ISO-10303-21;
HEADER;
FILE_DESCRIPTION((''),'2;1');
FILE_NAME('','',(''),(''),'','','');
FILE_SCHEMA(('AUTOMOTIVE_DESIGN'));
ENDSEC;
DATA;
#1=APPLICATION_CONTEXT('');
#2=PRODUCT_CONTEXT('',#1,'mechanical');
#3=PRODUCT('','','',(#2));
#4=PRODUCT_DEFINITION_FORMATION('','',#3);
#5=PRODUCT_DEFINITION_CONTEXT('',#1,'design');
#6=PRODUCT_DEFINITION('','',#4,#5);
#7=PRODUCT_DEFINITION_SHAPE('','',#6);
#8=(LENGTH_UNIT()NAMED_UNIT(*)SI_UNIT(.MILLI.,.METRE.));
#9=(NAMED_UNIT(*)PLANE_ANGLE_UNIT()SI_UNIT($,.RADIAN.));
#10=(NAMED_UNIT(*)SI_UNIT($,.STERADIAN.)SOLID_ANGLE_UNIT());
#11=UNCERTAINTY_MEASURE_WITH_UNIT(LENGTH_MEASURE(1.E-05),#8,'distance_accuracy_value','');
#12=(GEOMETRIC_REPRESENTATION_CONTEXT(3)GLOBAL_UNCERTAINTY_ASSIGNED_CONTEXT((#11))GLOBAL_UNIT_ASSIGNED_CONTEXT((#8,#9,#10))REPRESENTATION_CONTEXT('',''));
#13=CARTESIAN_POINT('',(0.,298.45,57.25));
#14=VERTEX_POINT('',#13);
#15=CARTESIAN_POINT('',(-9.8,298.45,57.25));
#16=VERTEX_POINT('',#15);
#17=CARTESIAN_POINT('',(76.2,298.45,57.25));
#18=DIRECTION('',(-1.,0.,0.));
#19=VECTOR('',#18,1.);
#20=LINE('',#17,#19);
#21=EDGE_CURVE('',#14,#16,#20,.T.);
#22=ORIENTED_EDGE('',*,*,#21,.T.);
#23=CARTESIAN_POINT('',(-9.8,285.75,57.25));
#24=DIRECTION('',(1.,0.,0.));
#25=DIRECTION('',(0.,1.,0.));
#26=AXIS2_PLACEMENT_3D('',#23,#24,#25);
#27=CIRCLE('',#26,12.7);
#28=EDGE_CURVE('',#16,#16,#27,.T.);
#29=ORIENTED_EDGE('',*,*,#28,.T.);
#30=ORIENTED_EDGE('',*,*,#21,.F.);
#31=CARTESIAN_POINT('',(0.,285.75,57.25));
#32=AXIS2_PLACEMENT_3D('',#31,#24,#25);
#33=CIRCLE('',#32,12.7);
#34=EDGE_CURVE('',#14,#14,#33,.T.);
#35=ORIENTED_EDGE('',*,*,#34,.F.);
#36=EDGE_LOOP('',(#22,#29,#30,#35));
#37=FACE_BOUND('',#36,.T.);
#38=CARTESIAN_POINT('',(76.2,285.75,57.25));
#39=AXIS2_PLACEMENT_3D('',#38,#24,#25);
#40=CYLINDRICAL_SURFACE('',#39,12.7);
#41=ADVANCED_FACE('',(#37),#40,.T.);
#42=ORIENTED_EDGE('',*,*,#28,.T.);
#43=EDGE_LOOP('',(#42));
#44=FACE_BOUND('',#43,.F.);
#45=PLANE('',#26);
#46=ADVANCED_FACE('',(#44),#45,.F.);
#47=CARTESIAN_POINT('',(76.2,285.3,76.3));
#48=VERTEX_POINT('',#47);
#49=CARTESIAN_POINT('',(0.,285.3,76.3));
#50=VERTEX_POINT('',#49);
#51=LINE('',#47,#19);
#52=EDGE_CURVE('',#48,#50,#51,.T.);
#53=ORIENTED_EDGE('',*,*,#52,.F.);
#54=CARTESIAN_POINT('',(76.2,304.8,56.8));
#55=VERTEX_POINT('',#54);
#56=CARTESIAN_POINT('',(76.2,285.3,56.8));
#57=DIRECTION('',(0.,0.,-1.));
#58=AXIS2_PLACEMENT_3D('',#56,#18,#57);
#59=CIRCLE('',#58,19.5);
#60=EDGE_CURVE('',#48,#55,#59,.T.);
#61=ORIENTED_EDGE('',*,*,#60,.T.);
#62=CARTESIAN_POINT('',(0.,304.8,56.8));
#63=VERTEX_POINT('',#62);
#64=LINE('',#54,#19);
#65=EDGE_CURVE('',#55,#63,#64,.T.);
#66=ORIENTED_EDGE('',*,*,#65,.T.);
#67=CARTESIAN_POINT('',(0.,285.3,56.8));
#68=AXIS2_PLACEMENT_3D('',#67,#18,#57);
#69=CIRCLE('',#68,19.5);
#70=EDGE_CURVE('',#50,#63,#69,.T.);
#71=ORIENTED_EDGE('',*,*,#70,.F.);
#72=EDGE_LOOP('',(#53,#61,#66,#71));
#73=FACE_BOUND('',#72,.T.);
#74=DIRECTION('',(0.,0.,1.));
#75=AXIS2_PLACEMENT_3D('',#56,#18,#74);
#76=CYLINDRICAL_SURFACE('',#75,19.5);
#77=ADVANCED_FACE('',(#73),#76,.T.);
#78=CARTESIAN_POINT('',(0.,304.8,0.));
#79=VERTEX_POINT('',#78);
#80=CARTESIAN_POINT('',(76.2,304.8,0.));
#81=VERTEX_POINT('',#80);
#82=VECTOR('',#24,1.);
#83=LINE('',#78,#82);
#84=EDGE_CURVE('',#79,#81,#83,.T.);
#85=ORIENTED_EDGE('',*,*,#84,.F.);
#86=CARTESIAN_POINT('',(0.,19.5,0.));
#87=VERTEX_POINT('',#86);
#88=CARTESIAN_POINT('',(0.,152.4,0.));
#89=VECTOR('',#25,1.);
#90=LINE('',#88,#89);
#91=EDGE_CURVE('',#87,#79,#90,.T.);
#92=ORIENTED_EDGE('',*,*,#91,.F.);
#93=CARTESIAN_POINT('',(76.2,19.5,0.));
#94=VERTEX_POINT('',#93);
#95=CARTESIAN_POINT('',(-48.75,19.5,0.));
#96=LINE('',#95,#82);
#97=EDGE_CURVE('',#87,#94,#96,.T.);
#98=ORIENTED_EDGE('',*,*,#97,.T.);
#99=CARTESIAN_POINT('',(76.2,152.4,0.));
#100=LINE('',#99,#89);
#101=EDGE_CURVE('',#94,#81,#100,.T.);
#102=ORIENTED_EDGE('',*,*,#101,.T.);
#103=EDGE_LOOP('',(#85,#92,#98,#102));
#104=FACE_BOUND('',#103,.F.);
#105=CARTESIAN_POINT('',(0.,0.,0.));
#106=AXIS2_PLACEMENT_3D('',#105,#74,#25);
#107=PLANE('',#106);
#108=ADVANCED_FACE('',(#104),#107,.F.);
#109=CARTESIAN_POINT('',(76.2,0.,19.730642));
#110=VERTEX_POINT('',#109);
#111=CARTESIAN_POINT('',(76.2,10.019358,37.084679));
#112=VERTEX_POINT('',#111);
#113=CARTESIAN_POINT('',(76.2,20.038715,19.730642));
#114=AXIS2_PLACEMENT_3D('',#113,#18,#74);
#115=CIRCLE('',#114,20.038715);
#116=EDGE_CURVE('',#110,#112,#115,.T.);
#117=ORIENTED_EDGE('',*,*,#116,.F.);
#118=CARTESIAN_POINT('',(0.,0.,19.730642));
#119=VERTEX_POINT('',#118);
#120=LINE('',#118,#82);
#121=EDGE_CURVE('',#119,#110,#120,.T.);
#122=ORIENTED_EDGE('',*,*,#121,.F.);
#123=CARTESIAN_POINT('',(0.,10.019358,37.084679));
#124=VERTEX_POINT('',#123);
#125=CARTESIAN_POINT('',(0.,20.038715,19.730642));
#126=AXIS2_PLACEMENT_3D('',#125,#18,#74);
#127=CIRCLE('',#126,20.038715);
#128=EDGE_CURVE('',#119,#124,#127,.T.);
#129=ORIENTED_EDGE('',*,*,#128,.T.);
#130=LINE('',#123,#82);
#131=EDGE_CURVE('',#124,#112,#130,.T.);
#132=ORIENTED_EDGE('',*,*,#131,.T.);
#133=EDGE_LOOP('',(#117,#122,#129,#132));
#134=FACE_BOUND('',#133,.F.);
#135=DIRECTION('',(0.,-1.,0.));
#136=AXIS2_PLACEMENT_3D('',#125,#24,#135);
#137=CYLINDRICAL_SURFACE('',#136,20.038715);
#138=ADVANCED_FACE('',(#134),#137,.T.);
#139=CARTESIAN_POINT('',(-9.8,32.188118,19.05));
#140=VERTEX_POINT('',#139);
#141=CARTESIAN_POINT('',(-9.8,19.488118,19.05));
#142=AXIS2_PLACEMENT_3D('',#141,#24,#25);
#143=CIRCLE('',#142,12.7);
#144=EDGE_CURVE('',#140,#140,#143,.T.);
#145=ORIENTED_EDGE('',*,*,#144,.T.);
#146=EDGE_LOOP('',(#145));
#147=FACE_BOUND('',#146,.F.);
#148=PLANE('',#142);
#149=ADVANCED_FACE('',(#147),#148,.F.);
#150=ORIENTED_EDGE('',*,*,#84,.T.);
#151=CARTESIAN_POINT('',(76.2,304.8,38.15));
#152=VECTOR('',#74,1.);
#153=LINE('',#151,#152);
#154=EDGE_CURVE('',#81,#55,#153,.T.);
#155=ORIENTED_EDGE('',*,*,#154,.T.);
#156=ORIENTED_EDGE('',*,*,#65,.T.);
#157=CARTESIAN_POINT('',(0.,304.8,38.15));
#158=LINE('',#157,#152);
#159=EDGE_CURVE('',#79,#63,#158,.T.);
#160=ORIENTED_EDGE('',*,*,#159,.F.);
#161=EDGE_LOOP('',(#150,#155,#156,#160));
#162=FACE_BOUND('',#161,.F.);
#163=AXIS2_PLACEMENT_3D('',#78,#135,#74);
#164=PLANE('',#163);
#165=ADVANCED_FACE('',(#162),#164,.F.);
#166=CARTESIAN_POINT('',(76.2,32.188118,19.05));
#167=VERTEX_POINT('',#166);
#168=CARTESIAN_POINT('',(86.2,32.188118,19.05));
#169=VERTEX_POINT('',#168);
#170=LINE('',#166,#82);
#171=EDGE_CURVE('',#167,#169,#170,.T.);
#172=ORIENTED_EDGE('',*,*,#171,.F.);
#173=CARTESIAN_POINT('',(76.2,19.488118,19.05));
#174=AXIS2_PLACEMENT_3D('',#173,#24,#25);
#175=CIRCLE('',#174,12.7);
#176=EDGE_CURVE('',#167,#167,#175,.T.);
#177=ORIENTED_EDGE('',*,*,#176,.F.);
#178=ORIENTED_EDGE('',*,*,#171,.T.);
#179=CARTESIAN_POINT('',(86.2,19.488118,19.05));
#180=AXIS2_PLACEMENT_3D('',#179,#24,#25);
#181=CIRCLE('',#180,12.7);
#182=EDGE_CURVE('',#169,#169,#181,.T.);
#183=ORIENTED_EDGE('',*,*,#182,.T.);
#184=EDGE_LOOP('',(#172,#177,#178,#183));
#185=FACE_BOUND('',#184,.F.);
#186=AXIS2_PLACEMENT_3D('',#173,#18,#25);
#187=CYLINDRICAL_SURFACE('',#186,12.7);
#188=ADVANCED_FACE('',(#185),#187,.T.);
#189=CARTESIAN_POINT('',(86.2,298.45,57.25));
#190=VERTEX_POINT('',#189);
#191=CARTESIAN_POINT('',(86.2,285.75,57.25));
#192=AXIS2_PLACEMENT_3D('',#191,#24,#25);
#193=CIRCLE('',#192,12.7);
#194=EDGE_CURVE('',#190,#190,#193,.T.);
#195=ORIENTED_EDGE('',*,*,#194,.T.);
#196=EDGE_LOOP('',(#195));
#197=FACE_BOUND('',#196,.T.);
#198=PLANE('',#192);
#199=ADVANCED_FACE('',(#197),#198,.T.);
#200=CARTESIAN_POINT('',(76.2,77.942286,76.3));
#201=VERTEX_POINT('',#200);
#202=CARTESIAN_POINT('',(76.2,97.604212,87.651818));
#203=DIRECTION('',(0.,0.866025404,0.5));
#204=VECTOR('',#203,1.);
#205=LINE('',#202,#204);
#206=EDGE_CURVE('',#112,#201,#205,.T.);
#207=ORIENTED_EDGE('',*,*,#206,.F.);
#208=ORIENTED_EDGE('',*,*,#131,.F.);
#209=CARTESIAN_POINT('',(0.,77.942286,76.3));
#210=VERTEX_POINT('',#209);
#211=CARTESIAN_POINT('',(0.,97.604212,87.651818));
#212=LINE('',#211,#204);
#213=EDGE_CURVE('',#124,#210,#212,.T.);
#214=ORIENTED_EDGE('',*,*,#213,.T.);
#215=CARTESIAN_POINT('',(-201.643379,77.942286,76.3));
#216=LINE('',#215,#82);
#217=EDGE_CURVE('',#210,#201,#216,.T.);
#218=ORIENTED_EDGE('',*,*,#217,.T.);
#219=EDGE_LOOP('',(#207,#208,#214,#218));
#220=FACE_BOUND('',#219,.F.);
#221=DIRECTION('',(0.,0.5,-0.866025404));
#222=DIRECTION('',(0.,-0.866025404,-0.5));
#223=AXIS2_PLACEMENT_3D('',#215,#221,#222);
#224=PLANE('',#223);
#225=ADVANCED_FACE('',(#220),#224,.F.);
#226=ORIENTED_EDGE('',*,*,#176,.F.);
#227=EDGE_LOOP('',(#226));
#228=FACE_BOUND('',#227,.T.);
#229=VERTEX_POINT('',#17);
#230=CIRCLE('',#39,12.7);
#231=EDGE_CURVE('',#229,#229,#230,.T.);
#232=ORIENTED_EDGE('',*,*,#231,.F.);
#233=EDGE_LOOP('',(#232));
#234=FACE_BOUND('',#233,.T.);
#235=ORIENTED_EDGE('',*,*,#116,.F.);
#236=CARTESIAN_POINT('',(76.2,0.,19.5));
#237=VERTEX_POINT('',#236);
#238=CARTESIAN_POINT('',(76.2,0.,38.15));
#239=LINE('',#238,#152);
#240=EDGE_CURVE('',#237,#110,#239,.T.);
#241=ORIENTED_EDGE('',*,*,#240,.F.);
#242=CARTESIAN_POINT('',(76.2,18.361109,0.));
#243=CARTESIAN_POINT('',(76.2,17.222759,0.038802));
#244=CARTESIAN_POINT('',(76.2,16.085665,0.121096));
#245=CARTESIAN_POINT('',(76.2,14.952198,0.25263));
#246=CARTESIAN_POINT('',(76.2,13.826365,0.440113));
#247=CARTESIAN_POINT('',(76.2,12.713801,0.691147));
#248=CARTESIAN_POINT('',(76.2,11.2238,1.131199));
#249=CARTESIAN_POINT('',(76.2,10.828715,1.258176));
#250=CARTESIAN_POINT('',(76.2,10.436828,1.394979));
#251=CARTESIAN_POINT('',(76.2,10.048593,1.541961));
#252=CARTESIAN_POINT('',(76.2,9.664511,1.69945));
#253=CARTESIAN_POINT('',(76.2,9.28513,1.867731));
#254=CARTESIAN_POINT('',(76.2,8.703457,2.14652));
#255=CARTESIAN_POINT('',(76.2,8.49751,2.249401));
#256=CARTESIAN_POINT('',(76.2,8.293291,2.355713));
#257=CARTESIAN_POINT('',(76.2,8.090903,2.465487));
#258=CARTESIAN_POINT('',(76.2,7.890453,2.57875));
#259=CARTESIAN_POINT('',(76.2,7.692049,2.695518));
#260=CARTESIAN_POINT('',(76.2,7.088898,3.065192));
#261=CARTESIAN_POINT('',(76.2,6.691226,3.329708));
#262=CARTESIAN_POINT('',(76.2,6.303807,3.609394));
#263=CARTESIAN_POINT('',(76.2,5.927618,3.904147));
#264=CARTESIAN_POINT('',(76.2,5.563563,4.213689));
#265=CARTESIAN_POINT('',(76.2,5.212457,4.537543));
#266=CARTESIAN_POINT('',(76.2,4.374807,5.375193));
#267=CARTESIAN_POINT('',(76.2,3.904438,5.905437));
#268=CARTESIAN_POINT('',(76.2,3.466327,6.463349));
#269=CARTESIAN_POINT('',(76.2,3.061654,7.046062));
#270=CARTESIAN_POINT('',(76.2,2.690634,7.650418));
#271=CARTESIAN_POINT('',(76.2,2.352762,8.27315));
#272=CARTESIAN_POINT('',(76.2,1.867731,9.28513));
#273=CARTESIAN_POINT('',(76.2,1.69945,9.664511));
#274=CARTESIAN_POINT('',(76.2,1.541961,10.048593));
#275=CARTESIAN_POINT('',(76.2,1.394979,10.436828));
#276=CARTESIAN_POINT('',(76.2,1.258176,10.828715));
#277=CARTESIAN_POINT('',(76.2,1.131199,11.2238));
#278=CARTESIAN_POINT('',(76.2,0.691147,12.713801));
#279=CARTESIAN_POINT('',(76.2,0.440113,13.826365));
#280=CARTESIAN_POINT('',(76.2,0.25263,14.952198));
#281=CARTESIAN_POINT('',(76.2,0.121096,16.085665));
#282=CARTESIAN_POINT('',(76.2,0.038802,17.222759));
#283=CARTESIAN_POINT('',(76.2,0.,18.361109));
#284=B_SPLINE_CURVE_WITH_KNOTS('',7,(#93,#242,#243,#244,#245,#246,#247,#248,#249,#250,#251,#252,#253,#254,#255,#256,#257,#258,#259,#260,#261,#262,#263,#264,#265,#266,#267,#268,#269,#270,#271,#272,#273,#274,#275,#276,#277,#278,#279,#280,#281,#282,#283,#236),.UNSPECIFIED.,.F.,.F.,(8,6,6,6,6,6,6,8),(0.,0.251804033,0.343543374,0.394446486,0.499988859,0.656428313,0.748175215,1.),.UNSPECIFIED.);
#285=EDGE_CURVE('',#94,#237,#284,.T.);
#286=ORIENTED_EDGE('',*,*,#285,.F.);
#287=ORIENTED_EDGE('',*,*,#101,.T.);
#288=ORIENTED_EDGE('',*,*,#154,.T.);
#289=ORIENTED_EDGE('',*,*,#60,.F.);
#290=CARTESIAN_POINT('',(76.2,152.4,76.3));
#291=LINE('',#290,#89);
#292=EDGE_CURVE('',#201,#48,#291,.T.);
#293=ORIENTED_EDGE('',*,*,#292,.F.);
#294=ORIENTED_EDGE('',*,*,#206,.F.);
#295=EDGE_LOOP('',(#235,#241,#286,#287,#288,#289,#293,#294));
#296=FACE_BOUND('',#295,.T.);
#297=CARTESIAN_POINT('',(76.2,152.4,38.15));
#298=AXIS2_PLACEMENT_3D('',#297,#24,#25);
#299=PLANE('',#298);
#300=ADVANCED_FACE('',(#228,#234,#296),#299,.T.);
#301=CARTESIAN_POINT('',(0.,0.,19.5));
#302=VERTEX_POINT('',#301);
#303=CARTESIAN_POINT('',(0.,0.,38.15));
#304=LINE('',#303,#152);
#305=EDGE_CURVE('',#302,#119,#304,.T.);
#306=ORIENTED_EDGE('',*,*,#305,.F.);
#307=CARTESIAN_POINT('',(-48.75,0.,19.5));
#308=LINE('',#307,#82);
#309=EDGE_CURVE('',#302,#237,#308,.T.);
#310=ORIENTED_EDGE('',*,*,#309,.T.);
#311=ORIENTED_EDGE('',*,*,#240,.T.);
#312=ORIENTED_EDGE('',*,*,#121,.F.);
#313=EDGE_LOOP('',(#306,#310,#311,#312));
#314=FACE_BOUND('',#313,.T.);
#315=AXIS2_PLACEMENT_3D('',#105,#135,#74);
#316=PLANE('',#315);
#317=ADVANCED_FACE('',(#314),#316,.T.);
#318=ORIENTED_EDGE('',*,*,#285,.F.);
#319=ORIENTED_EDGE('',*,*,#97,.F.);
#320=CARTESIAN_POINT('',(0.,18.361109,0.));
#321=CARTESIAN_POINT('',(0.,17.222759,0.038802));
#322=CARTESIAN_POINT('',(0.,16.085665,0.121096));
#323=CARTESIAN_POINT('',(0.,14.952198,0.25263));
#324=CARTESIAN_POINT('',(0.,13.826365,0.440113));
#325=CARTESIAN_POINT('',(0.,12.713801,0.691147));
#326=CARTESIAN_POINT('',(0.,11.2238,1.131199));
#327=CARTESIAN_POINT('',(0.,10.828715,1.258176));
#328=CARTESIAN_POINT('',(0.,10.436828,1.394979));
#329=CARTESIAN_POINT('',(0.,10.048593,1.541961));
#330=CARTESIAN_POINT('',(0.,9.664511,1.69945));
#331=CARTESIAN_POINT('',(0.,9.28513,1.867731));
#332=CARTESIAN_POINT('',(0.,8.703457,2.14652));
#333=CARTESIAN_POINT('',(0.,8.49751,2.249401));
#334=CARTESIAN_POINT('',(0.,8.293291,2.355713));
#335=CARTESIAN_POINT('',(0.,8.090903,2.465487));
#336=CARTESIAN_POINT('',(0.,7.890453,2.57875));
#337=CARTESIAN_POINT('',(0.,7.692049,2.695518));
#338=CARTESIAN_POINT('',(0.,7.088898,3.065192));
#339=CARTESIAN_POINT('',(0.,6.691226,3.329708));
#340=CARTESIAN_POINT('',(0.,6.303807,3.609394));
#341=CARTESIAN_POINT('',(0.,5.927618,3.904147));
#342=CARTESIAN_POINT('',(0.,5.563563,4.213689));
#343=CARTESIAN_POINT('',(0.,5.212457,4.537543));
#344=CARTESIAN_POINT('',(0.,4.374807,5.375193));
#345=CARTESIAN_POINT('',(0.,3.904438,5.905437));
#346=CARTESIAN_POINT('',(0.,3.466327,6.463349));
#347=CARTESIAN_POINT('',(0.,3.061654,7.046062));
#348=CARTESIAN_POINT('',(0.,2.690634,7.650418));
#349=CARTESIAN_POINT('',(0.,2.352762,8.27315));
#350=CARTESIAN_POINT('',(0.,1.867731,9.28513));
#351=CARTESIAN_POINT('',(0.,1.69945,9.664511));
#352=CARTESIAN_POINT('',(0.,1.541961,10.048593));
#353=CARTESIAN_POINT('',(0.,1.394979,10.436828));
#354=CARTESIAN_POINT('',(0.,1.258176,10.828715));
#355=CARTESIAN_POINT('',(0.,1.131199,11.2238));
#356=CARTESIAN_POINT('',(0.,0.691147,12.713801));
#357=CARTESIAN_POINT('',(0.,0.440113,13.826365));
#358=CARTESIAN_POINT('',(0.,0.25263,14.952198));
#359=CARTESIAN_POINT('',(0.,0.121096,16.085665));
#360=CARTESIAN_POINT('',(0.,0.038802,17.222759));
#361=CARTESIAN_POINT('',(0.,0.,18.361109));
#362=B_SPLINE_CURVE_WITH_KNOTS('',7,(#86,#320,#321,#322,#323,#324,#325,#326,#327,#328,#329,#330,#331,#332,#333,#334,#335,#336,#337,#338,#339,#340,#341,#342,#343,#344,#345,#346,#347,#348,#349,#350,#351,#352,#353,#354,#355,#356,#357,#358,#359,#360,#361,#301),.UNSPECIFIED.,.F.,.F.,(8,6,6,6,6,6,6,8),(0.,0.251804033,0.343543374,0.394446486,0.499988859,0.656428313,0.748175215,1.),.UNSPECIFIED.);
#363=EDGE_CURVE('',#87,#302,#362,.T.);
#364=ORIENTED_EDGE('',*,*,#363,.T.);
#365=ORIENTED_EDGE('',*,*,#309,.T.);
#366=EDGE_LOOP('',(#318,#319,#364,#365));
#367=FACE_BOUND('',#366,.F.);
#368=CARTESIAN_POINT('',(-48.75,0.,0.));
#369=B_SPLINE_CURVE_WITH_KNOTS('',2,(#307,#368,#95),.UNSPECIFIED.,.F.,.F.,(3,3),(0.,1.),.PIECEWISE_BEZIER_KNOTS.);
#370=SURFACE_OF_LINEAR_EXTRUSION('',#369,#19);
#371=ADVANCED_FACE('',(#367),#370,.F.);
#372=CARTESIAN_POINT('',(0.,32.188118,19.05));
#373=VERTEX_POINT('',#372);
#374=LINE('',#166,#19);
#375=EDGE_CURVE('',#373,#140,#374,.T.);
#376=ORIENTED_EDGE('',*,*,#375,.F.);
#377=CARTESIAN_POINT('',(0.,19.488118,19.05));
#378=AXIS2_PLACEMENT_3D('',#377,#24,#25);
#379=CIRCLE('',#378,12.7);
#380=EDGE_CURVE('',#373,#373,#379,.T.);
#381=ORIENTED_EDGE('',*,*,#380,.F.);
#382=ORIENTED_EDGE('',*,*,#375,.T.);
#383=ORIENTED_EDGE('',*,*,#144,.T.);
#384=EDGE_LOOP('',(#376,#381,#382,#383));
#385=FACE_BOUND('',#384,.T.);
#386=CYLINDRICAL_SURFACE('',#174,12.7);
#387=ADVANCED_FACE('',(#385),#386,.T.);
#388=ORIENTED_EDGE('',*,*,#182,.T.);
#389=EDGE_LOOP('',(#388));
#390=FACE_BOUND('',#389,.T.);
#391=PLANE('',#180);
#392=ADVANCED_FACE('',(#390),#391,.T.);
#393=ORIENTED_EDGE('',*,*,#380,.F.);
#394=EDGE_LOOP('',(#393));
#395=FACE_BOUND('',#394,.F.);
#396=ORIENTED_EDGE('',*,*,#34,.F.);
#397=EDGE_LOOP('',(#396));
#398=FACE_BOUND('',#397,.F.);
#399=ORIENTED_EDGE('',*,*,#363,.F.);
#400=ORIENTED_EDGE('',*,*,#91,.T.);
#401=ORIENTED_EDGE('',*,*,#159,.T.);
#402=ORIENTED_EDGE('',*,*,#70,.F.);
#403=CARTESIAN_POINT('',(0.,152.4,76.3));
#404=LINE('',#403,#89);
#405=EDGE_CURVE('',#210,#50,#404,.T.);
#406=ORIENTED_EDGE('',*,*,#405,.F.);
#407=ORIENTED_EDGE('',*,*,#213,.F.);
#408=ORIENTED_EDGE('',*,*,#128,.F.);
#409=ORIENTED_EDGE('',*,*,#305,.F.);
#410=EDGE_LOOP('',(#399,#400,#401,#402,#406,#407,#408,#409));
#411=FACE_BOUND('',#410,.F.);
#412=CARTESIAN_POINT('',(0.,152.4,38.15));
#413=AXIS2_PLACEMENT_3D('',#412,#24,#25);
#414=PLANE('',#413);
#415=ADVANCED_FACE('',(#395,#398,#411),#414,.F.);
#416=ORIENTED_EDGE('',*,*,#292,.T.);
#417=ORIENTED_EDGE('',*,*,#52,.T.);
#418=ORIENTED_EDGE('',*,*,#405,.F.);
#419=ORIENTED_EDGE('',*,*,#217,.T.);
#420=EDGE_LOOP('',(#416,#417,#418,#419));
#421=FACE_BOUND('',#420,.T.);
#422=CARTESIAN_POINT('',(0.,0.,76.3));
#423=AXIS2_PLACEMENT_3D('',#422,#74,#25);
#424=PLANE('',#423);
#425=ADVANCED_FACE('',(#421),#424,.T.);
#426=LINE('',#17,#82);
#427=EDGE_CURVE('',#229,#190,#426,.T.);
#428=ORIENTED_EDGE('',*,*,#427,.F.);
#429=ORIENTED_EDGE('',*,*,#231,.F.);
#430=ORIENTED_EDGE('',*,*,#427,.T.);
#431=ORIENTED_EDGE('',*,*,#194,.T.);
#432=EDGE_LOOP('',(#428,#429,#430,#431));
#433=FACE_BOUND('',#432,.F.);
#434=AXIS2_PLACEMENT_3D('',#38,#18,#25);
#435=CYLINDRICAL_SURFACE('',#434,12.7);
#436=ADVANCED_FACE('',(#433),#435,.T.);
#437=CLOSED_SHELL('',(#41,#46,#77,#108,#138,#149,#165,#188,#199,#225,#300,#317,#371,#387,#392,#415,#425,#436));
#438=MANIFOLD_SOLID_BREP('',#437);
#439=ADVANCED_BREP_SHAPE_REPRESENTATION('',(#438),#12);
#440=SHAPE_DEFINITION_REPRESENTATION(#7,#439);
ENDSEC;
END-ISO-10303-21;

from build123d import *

# Parameters (mm, degrees)
F0_W           = 304.8
F0_H           = 76.3
F1_DEPTH       = 3
F2_DEPTH       = 76.2
F3_T1_DEPTH    = 173.7
F4_R           = 19.5
F5_T1_DEPTH    = 479.4867573526
F6_R           = 20.0387150069
F8_R           = 12.7
F9_DEPTH       = 10
F9_DEPTH_BACK  = 86
F10_R          = 12.7
F11_DEPTH      = 10
F11_DEPTH_BACK = 86


# Not quite as in the source:
# - a fillet or chamfer that OpenCascade refuses, or shapes differently, is made with other operations: its cross-section is extruded or revolved along the edge and cut away or added


with BuildPart() as f1:
    # F0 (on Right) → F1 (new body)
    with BuildSketch(Plane.YZ):
        with Locations((152.4, 38.15)):
            Rectangle(F0_W, F0_H)
    extrude(amount=F1_DEPTH)

    # F0 (on Right) → F2 (join)
    with BuildSketch(Plane.YZ):
        with Locations((152.4, 38.15)):
            Rectangle(F0_W, F0_H)
    extrude(amount=F2_DEPTH)

    # F3: fillet of radius 19.5 on 1 edges, made by hand

    # F3_s2 → F3_t1 (cut)
    with BuildSketch(Plane.YZ.offset(-48.75)):
        with BuildLine():
            add(Edge.make_bspline(
                [(0, 19.5), (0, 0), (19.5, 0)],
                knots=[0, 0, 0, 1, 1, 1], degree=2, weights=[1, 1, 1]))
            Line((19.5, 0), (0, 0))
            Line((0, 0), (0, 19.5))
        make_face()
    extrude(amount=F3_T1_DEPTH, mode=Mode.SUBTRACT)

    # F4
    f4_edges = [f1.edges().sort_by_distance(p)[0] for p in [
        (38.1, 304.8, 76.3),
    ]]
    fillet(f4_edges, radius=F4_R)

    # F5: chamfer of 45 x 77.9422863406 on 1 edges, made by hand

    # F5_s2 → F5_t1 (cut)
    with BuildSketch(Plane.YZ.offset(-201.6433786763)):
        Polygon((77.9422863406, 76.3), (0, 31.3), (0, 76.3), align=None)
    extrude(amount=F5_T1_DEPTH, mode=Mode.SUBTRACT)

    # F6
    f6_edges = [f1.edges().sort_by_distance(p)[0] for p in [
        (38.1, 0, 31.3),
    ]]
    fillet(f6_edges, radius=F6_R)

    # F8 (on offset) → F9 (join, two sides)
    with BuildSketch(Plane.YZ.offset(76.2)) as f9_sk:
        with Locations((19.4881175538, 19.05)):
            Circle(F8_R)
    extrude(amount=F9_DEPTH)
    extrude(f9_sk.sketch, amount=-F9_DEPTH_BACK)

    # F10 (on offset) → F11 (join, two sides)
    with BuildSketch(Plane.YZ.offset(76.2)) as f11_sk:
        with Locations((285.75, 57.25)):
            Circle(F10_R)
    extrude(amount=F11_DEPTH)
    extrude(f11_sk.sketch, amount=-F11_DEPTH_BACK)


solid = f1.part
